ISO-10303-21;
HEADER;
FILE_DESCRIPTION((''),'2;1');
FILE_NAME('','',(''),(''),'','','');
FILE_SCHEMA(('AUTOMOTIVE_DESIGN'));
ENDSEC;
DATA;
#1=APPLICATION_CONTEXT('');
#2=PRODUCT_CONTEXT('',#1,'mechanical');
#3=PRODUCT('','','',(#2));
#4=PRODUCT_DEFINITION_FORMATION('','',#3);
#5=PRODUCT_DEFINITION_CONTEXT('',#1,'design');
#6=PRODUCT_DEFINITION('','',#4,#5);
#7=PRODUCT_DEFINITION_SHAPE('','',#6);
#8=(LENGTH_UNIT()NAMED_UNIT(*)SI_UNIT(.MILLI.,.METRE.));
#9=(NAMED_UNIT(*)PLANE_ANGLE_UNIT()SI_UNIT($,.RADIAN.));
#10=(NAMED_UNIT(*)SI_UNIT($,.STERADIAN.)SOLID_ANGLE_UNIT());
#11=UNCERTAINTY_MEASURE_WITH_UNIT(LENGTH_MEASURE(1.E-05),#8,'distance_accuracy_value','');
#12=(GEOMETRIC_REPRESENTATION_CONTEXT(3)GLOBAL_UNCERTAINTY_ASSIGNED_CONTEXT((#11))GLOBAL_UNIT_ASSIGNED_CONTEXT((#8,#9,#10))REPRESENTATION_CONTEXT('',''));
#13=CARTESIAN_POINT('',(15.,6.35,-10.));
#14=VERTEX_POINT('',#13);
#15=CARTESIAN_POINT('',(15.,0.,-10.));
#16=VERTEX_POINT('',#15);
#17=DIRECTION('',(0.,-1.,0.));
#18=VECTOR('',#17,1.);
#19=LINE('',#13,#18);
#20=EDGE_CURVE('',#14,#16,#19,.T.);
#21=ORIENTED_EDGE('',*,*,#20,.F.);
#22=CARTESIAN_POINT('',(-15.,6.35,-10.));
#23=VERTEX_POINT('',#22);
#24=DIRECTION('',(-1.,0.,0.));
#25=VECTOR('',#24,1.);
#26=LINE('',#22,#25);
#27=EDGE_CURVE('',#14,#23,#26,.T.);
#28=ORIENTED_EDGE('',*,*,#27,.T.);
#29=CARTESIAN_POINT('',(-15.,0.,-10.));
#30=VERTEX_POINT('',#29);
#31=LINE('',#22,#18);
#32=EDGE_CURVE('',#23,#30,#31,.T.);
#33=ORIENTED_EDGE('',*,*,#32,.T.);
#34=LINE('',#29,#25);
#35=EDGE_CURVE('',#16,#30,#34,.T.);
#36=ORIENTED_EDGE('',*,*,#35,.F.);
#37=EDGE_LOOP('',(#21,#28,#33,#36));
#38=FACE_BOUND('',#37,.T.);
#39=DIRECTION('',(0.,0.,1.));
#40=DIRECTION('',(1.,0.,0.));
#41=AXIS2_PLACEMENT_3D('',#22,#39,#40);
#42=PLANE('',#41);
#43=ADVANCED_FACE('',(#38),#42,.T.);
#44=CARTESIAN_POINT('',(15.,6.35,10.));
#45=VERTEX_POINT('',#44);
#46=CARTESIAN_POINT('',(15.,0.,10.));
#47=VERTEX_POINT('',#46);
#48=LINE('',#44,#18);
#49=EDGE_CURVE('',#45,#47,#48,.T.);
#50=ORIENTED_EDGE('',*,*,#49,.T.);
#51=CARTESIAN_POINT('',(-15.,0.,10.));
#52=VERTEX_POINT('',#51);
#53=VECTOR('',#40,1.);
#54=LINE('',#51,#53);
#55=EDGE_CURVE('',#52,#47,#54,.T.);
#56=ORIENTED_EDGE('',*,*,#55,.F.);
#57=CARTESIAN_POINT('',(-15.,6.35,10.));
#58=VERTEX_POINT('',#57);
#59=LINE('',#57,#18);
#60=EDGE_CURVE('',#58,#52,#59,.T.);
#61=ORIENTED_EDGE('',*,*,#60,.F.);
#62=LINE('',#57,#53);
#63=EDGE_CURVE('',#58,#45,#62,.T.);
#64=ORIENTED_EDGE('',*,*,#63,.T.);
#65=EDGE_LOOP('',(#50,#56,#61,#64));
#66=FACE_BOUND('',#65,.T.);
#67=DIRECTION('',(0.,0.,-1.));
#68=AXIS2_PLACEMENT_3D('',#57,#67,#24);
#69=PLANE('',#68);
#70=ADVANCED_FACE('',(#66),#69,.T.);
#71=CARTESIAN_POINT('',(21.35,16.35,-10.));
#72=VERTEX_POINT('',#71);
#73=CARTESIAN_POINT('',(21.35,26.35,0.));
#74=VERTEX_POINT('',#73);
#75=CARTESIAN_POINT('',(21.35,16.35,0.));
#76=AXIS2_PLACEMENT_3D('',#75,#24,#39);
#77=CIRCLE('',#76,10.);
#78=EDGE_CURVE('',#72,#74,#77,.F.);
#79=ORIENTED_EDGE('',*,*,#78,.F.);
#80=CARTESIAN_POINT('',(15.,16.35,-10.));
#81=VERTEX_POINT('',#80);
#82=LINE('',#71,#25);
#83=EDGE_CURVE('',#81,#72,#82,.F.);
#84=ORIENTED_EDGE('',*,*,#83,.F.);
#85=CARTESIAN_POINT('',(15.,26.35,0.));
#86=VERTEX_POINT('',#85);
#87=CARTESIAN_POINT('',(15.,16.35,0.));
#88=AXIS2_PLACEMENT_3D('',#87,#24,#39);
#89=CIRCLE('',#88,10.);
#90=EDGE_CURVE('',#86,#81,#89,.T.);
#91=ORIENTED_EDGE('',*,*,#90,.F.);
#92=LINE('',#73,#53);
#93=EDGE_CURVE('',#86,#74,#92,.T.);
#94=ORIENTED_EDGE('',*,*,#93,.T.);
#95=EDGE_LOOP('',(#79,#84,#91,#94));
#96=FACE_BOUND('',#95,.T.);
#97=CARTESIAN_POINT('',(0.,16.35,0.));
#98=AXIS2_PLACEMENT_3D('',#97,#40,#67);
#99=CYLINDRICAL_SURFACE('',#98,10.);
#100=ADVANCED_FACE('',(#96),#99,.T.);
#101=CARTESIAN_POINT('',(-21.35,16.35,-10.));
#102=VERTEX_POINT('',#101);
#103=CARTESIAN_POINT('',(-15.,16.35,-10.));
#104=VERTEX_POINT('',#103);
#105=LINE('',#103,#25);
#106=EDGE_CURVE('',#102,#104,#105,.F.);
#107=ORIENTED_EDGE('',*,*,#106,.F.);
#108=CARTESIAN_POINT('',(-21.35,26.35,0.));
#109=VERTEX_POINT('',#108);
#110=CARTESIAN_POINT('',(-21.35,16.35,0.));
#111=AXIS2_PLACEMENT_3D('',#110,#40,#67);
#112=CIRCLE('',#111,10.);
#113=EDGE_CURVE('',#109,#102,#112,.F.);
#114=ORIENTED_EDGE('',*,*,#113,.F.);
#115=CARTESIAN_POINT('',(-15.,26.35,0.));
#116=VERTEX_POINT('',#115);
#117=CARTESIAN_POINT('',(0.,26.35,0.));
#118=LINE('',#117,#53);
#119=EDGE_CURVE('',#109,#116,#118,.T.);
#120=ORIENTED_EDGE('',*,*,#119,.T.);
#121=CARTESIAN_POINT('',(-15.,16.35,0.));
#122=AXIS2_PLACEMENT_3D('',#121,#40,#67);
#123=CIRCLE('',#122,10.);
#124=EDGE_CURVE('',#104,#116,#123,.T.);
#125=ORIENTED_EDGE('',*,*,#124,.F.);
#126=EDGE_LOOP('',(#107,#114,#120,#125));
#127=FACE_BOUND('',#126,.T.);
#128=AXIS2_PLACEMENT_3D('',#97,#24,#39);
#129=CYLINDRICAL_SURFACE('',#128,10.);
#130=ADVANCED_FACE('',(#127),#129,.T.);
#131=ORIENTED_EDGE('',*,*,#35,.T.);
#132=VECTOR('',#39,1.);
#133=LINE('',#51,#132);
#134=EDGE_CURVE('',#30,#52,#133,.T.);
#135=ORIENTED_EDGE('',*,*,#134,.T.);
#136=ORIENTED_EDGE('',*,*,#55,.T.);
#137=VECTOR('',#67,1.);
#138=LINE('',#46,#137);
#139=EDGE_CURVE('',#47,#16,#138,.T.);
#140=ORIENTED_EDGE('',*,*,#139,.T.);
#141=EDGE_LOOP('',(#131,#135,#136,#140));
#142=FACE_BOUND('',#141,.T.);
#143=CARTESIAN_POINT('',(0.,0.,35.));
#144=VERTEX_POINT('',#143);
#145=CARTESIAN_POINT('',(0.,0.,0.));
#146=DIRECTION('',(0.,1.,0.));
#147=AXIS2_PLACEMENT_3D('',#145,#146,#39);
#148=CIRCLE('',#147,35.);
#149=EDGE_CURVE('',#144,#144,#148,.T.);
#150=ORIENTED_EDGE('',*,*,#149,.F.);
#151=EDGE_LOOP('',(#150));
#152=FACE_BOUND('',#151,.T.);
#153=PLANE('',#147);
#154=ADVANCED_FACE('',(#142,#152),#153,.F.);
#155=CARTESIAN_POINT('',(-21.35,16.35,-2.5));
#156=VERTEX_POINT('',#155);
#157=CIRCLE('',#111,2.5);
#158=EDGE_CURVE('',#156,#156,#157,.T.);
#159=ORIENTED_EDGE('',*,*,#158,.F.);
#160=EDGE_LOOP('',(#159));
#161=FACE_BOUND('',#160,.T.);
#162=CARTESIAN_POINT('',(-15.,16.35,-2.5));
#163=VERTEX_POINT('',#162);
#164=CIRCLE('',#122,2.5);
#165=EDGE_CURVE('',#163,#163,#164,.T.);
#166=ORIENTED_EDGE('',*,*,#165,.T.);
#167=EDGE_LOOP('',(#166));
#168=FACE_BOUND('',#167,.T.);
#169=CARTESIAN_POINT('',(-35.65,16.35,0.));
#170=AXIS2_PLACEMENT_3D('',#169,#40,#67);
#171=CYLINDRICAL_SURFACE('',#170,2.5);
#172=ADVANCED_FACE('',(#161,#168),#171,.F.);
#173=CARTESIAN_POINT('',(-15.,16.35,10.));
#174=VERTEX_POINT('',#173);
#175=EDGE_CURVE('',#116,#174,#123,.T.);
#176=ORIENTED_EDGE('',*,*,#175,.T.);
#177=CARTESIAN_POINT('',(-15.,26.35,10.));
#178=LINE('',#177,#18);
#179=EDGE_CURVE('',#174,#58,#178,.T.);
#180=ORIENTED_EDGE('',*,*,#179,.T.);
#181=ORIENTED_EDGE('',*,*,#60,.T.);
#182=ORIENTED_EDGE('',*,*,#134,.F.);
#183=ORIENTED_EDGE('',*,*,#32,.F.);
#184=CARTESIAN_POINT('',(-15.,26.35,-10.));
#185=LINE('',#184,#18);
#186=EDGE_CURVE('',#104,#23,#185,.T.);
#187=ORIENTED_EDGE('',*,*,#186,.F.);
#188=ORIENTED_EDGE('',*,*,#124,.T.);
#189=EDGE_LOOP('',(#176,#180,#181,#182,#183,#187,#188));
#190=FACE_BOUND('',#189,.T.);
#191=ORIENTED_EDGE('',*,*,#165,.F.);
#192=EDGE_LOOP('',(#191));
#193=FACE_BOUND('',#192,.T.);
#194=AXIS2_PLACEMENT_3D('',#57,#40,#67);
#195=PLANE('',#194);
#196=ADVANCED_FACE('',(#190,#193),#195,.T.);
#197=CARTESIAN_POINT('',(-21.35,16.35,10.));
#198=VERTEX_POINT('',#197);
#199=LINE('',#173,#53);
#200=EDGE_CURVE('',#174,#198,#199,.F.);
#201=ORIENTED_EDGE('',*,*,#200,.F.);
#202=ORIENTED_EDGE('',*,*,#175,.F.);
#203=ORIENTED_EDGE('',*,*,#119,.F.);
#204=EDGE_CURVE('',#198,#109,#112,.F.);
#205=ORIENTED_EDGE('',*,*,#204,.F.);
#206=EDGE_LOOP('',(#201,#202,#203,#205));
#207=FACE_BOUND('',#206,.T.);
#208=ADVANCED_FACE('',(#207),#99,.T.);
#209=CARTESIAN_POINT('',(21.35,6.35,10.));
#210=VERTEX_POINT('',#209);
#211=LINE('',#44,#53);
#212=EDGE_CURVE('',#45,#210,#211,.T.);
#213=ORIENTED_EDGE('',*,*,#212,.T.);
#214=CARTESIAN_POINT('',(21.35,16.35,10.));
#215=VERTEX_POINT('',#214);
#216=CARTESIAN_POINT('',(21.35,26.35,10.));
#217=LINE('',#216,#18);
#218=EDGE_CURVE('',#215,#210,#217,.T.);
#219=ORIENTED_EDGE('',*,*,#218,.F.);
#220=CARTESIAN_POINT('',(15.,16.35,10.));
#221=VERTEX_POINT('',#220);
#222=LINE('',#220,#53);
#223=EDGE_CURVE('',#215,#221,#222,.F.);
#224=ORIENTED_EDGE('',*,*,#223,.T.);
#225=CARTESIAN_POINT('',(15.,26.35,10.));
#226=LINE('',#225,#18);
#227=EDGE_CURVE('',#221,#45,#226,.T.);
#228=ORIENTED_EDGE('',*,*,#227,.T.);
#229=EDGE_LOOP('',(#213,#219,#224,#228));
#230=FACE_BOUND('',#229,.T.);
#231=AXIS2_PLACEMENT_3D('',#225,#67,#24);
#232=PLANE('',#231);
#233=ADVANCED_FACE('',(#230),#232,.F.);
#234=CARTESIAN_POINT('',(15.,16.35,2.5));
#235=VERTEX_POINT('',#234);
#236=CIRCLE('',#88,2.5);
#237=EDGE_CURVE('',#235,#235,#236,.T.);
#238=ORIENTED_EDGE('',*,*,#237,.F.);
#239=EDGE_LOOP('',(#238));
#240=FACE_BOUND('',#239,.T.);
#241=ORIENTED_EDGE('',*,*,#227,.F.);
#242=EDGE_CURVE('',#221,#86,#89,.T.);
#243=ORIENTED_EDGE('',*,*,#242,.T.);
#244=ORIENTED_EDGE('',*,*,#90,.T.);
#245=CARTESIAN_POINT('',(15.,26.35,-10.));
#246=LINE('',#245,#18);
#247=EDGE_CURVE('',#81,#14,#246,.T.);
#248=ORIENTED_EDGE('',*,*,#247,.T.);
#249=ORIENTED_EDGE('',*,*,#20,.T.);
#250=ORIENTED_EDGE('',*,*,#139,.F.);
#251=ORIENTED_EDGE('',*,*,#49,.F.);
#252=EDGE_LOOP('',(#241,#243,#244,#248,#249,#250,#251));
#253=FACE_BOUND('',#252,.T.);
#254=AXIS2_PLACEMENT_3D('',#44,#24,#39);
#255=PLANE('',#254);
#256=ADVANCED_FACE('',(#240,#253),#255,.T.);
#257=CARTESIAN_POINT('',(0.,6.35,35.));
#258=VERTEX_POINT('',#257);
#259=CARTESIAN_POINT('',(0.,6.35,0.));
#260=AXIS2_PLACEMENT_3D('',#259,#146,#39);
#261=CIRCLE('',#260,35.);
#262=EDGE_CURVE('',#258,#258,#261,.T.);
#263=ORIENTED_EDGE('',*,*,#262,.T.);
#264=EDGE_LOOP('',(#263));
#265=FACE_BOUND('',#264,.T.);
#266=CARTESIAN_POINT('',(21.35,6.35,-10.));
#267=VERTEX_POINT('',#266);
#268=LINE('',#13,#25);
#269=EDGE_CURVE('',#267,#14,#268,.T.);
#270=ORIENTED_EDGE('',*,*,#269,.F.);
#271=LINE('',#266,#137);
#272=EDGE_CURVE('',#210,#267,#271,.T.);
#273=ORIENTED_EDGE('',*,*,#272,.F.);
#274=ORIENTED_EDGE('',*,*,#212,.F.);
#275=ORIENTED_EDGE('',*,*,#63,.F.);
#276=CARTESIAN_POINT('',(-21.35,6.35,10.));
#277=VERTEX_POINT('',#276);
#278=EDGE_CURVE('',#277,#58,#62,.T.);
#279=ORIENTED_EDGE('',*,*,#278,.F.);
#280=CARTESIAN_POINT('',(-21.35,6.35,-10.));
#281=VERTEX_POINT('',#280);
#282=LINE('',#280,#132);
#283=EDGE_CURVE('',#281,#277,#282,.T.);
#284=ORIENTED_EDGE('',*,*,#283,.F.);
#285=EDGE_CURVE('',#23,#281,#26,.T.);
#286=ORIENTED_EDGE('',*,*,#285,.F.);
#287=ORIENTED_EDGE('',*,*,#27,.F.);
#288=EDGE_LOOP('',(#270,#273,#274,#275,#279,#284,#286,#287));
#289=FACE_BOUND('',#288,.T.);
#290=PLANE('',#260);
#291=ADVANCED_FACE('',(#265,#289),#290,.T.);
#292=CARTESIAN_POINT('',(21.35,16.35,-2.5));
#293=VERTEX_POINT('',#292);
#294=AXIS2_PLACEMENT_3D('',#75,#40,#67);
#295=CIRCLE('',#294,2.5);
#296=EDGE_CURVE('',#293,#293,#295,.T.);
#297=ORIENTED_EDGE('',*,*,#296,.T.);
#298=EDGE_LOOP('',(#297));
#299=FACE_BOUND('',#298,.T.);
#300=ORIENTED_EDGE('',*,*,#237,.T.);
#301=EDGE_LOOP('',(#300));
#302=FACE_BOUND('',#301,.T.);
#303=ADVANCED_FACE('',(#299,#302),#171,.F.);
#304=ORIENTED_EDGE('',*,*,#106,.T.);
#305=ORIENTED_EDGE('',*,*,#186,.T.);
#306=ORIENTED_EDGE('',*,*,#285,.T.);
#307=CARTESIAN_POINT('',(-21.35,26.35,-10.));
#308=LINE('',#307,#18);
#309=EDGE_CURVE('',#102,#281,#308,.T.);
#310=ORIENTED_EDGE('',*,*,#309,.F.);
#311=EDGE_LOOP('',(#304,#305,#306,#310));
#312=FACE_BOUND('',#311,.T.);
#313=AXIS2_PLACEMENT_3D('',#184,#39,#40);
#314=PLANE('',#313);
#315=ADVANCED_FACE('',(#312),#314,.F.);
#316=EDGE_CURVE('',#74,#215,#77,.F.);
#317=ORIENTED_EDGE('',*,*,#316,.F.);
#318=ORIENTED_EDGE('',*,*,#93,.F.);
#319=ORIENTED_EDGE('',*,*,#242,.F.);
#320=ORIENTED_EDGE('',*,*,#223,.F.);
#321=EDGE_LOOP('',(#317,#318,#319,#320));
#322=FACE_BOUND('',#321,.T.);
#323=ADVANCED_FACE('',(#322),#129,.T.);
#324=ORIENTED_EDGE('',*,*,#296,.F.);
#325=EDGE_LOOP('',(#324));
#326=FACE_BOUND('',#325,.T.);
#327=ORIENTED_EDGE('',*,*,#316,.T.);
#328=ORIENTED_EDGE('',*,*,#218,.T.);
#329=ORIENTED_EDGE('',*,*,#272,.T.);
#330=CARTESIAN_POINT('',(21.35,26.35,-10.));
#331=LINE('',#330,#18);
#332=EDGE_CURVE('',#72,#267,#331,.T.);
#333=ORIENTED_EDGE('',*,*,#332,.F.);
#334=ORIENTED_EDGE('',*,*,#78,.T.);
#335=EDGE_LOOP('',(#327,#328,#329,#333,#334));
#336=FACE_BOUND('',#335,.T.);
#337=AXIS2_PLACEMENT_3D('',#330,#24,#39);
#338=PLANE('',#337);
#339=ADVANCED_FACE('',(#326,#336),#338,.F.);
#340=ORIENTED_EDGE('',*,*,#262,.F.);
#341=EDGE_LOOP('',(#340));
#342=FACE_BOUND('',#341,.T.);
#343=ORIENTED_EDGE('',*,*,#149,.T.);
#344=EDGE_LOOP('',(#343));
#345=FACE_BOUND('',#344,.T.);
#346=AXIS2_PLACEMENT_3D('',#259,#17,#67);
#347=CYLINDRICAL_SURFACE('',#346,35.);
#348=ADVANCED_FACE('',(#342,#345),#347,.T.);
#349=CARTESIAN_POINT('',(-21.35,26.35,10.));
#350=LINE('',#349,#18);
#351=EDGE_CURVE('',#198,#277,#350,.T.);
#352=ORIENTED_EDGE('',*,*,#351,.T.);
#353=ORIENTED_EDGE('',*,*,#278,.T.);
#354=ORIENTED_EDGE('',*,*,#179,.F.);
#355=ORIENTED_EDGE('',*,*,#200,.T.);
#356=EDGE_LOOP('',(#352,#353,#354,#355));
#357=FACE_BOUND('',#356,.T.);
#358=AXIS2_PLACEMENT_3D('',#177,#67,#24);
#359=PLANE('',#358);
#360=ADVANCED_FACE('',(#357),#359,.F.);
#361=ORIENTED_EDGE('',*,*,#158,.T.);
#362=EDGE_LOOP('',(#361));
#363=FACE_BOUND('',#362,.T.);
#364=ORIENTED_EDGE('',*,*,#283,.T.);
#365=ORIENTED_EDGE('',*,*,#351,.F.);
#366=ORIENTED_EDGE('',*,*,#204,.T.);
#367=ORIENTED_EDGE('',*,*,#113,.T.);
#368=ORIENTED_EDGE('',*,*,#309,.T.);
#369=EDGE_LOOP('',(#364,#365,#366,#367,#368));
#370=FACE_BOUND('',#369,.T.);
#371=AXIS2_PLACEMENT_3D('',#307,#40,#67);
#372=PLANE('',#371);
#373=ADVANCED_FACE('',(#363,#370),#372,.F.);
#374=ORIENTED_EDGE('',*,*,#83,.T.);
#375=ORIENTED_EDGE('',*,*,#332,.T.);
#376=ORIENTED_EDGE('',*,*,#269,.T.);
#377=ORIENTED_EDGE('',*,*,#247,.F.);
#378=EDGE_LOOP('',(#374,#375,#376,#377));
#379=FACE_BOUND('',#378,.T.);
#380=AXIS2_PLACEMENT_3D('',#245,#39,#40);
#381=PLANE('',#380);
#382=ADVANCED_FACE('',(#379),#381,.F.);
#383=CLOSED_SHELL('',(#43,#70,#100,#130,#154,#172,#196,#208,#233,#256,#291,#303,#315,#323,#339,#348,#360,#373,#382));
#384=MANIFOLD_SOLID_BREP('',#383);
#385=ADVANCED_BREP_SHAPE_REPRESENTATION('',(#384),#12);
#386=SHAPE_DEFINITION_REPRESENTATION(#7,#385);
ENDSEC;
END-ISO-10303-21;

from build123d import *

# Parameters (mm, degrees)
SKETCH1_R           = 35
SKETCH1_W           = 30
SKETCH1_H           = 20
BOSS_EXTRUDE1_DEPTH = 6.35
SKETCH2_W           = 6.35
SKETCH2_H           = 20
BOSS_EXTRUDE2_DEPTH = 20
SKETCH3_R           = 2.5
CUT_EXTRUDE1_DEPTH  = 57
FILLET1_R           = 10


with BuildPart() as part:
    # Sketch1 → Boss-Extrude1 (new body)
    with BuildSketch(Plane(origin=(0, 0, 0), x_dir=(1, 0, 0), z_dir=(0, 1, 0))):
        with Locations(Location((0, 0, 0), (0, 0, 270))):
            Circle(SKETCH1_R)
        Rectangle(SKETCH1_W, SKETCH1_H, mode=Mode.SUBTRACT)
    extrude(amount=BOSS_EXTRUDE1_DEPTH)

    # Sketch2 → Boss-Extrude2 (add)
    with BuildSketch(Plane(origin=(0, 6.35, 0), x_dir=(1, 0, 0), z_dir=(0, 1, 0))):
        with Locations((-18.175, 0)):
            Rectangle(SKETCH2_W, SKETCH2_H)
        with Locations((18.175, 0)):
            Rectangle(SKETCH2_W, SKETCH2_H)
    extrude(amount=BOSS_EXTRUDE2_DEPTH)

    # Sketch3 → Cut-Extrude1 (cut)
    with BuildSketch(Plane(origin=(21.35, 0, 0), x_dir=(0, 0, -1), z_dir=(1, 0, 0))):
        with Locations((0, 16.35)):
            Circle(SKETCH3_R)
    extrude(amount=-CUT_EXTRUDE1_DEPTH, mode=Mode.SUBTRACT)

    # Fillet1
    fillet1_edges = [part.edges().sort_by_distance(p)[0] for p in [
        (18.175, 26.35, -10),
        (18.175, 26.35, 10),
        (-18.175, 26.35, -10),
        (-18.175, 26.35, 10),
    ]]
    fillet(fillet1_edges, radius=FILLET1_R - 0.0001)  # a hair under: the kernel refuses the full size


solid = part.part
